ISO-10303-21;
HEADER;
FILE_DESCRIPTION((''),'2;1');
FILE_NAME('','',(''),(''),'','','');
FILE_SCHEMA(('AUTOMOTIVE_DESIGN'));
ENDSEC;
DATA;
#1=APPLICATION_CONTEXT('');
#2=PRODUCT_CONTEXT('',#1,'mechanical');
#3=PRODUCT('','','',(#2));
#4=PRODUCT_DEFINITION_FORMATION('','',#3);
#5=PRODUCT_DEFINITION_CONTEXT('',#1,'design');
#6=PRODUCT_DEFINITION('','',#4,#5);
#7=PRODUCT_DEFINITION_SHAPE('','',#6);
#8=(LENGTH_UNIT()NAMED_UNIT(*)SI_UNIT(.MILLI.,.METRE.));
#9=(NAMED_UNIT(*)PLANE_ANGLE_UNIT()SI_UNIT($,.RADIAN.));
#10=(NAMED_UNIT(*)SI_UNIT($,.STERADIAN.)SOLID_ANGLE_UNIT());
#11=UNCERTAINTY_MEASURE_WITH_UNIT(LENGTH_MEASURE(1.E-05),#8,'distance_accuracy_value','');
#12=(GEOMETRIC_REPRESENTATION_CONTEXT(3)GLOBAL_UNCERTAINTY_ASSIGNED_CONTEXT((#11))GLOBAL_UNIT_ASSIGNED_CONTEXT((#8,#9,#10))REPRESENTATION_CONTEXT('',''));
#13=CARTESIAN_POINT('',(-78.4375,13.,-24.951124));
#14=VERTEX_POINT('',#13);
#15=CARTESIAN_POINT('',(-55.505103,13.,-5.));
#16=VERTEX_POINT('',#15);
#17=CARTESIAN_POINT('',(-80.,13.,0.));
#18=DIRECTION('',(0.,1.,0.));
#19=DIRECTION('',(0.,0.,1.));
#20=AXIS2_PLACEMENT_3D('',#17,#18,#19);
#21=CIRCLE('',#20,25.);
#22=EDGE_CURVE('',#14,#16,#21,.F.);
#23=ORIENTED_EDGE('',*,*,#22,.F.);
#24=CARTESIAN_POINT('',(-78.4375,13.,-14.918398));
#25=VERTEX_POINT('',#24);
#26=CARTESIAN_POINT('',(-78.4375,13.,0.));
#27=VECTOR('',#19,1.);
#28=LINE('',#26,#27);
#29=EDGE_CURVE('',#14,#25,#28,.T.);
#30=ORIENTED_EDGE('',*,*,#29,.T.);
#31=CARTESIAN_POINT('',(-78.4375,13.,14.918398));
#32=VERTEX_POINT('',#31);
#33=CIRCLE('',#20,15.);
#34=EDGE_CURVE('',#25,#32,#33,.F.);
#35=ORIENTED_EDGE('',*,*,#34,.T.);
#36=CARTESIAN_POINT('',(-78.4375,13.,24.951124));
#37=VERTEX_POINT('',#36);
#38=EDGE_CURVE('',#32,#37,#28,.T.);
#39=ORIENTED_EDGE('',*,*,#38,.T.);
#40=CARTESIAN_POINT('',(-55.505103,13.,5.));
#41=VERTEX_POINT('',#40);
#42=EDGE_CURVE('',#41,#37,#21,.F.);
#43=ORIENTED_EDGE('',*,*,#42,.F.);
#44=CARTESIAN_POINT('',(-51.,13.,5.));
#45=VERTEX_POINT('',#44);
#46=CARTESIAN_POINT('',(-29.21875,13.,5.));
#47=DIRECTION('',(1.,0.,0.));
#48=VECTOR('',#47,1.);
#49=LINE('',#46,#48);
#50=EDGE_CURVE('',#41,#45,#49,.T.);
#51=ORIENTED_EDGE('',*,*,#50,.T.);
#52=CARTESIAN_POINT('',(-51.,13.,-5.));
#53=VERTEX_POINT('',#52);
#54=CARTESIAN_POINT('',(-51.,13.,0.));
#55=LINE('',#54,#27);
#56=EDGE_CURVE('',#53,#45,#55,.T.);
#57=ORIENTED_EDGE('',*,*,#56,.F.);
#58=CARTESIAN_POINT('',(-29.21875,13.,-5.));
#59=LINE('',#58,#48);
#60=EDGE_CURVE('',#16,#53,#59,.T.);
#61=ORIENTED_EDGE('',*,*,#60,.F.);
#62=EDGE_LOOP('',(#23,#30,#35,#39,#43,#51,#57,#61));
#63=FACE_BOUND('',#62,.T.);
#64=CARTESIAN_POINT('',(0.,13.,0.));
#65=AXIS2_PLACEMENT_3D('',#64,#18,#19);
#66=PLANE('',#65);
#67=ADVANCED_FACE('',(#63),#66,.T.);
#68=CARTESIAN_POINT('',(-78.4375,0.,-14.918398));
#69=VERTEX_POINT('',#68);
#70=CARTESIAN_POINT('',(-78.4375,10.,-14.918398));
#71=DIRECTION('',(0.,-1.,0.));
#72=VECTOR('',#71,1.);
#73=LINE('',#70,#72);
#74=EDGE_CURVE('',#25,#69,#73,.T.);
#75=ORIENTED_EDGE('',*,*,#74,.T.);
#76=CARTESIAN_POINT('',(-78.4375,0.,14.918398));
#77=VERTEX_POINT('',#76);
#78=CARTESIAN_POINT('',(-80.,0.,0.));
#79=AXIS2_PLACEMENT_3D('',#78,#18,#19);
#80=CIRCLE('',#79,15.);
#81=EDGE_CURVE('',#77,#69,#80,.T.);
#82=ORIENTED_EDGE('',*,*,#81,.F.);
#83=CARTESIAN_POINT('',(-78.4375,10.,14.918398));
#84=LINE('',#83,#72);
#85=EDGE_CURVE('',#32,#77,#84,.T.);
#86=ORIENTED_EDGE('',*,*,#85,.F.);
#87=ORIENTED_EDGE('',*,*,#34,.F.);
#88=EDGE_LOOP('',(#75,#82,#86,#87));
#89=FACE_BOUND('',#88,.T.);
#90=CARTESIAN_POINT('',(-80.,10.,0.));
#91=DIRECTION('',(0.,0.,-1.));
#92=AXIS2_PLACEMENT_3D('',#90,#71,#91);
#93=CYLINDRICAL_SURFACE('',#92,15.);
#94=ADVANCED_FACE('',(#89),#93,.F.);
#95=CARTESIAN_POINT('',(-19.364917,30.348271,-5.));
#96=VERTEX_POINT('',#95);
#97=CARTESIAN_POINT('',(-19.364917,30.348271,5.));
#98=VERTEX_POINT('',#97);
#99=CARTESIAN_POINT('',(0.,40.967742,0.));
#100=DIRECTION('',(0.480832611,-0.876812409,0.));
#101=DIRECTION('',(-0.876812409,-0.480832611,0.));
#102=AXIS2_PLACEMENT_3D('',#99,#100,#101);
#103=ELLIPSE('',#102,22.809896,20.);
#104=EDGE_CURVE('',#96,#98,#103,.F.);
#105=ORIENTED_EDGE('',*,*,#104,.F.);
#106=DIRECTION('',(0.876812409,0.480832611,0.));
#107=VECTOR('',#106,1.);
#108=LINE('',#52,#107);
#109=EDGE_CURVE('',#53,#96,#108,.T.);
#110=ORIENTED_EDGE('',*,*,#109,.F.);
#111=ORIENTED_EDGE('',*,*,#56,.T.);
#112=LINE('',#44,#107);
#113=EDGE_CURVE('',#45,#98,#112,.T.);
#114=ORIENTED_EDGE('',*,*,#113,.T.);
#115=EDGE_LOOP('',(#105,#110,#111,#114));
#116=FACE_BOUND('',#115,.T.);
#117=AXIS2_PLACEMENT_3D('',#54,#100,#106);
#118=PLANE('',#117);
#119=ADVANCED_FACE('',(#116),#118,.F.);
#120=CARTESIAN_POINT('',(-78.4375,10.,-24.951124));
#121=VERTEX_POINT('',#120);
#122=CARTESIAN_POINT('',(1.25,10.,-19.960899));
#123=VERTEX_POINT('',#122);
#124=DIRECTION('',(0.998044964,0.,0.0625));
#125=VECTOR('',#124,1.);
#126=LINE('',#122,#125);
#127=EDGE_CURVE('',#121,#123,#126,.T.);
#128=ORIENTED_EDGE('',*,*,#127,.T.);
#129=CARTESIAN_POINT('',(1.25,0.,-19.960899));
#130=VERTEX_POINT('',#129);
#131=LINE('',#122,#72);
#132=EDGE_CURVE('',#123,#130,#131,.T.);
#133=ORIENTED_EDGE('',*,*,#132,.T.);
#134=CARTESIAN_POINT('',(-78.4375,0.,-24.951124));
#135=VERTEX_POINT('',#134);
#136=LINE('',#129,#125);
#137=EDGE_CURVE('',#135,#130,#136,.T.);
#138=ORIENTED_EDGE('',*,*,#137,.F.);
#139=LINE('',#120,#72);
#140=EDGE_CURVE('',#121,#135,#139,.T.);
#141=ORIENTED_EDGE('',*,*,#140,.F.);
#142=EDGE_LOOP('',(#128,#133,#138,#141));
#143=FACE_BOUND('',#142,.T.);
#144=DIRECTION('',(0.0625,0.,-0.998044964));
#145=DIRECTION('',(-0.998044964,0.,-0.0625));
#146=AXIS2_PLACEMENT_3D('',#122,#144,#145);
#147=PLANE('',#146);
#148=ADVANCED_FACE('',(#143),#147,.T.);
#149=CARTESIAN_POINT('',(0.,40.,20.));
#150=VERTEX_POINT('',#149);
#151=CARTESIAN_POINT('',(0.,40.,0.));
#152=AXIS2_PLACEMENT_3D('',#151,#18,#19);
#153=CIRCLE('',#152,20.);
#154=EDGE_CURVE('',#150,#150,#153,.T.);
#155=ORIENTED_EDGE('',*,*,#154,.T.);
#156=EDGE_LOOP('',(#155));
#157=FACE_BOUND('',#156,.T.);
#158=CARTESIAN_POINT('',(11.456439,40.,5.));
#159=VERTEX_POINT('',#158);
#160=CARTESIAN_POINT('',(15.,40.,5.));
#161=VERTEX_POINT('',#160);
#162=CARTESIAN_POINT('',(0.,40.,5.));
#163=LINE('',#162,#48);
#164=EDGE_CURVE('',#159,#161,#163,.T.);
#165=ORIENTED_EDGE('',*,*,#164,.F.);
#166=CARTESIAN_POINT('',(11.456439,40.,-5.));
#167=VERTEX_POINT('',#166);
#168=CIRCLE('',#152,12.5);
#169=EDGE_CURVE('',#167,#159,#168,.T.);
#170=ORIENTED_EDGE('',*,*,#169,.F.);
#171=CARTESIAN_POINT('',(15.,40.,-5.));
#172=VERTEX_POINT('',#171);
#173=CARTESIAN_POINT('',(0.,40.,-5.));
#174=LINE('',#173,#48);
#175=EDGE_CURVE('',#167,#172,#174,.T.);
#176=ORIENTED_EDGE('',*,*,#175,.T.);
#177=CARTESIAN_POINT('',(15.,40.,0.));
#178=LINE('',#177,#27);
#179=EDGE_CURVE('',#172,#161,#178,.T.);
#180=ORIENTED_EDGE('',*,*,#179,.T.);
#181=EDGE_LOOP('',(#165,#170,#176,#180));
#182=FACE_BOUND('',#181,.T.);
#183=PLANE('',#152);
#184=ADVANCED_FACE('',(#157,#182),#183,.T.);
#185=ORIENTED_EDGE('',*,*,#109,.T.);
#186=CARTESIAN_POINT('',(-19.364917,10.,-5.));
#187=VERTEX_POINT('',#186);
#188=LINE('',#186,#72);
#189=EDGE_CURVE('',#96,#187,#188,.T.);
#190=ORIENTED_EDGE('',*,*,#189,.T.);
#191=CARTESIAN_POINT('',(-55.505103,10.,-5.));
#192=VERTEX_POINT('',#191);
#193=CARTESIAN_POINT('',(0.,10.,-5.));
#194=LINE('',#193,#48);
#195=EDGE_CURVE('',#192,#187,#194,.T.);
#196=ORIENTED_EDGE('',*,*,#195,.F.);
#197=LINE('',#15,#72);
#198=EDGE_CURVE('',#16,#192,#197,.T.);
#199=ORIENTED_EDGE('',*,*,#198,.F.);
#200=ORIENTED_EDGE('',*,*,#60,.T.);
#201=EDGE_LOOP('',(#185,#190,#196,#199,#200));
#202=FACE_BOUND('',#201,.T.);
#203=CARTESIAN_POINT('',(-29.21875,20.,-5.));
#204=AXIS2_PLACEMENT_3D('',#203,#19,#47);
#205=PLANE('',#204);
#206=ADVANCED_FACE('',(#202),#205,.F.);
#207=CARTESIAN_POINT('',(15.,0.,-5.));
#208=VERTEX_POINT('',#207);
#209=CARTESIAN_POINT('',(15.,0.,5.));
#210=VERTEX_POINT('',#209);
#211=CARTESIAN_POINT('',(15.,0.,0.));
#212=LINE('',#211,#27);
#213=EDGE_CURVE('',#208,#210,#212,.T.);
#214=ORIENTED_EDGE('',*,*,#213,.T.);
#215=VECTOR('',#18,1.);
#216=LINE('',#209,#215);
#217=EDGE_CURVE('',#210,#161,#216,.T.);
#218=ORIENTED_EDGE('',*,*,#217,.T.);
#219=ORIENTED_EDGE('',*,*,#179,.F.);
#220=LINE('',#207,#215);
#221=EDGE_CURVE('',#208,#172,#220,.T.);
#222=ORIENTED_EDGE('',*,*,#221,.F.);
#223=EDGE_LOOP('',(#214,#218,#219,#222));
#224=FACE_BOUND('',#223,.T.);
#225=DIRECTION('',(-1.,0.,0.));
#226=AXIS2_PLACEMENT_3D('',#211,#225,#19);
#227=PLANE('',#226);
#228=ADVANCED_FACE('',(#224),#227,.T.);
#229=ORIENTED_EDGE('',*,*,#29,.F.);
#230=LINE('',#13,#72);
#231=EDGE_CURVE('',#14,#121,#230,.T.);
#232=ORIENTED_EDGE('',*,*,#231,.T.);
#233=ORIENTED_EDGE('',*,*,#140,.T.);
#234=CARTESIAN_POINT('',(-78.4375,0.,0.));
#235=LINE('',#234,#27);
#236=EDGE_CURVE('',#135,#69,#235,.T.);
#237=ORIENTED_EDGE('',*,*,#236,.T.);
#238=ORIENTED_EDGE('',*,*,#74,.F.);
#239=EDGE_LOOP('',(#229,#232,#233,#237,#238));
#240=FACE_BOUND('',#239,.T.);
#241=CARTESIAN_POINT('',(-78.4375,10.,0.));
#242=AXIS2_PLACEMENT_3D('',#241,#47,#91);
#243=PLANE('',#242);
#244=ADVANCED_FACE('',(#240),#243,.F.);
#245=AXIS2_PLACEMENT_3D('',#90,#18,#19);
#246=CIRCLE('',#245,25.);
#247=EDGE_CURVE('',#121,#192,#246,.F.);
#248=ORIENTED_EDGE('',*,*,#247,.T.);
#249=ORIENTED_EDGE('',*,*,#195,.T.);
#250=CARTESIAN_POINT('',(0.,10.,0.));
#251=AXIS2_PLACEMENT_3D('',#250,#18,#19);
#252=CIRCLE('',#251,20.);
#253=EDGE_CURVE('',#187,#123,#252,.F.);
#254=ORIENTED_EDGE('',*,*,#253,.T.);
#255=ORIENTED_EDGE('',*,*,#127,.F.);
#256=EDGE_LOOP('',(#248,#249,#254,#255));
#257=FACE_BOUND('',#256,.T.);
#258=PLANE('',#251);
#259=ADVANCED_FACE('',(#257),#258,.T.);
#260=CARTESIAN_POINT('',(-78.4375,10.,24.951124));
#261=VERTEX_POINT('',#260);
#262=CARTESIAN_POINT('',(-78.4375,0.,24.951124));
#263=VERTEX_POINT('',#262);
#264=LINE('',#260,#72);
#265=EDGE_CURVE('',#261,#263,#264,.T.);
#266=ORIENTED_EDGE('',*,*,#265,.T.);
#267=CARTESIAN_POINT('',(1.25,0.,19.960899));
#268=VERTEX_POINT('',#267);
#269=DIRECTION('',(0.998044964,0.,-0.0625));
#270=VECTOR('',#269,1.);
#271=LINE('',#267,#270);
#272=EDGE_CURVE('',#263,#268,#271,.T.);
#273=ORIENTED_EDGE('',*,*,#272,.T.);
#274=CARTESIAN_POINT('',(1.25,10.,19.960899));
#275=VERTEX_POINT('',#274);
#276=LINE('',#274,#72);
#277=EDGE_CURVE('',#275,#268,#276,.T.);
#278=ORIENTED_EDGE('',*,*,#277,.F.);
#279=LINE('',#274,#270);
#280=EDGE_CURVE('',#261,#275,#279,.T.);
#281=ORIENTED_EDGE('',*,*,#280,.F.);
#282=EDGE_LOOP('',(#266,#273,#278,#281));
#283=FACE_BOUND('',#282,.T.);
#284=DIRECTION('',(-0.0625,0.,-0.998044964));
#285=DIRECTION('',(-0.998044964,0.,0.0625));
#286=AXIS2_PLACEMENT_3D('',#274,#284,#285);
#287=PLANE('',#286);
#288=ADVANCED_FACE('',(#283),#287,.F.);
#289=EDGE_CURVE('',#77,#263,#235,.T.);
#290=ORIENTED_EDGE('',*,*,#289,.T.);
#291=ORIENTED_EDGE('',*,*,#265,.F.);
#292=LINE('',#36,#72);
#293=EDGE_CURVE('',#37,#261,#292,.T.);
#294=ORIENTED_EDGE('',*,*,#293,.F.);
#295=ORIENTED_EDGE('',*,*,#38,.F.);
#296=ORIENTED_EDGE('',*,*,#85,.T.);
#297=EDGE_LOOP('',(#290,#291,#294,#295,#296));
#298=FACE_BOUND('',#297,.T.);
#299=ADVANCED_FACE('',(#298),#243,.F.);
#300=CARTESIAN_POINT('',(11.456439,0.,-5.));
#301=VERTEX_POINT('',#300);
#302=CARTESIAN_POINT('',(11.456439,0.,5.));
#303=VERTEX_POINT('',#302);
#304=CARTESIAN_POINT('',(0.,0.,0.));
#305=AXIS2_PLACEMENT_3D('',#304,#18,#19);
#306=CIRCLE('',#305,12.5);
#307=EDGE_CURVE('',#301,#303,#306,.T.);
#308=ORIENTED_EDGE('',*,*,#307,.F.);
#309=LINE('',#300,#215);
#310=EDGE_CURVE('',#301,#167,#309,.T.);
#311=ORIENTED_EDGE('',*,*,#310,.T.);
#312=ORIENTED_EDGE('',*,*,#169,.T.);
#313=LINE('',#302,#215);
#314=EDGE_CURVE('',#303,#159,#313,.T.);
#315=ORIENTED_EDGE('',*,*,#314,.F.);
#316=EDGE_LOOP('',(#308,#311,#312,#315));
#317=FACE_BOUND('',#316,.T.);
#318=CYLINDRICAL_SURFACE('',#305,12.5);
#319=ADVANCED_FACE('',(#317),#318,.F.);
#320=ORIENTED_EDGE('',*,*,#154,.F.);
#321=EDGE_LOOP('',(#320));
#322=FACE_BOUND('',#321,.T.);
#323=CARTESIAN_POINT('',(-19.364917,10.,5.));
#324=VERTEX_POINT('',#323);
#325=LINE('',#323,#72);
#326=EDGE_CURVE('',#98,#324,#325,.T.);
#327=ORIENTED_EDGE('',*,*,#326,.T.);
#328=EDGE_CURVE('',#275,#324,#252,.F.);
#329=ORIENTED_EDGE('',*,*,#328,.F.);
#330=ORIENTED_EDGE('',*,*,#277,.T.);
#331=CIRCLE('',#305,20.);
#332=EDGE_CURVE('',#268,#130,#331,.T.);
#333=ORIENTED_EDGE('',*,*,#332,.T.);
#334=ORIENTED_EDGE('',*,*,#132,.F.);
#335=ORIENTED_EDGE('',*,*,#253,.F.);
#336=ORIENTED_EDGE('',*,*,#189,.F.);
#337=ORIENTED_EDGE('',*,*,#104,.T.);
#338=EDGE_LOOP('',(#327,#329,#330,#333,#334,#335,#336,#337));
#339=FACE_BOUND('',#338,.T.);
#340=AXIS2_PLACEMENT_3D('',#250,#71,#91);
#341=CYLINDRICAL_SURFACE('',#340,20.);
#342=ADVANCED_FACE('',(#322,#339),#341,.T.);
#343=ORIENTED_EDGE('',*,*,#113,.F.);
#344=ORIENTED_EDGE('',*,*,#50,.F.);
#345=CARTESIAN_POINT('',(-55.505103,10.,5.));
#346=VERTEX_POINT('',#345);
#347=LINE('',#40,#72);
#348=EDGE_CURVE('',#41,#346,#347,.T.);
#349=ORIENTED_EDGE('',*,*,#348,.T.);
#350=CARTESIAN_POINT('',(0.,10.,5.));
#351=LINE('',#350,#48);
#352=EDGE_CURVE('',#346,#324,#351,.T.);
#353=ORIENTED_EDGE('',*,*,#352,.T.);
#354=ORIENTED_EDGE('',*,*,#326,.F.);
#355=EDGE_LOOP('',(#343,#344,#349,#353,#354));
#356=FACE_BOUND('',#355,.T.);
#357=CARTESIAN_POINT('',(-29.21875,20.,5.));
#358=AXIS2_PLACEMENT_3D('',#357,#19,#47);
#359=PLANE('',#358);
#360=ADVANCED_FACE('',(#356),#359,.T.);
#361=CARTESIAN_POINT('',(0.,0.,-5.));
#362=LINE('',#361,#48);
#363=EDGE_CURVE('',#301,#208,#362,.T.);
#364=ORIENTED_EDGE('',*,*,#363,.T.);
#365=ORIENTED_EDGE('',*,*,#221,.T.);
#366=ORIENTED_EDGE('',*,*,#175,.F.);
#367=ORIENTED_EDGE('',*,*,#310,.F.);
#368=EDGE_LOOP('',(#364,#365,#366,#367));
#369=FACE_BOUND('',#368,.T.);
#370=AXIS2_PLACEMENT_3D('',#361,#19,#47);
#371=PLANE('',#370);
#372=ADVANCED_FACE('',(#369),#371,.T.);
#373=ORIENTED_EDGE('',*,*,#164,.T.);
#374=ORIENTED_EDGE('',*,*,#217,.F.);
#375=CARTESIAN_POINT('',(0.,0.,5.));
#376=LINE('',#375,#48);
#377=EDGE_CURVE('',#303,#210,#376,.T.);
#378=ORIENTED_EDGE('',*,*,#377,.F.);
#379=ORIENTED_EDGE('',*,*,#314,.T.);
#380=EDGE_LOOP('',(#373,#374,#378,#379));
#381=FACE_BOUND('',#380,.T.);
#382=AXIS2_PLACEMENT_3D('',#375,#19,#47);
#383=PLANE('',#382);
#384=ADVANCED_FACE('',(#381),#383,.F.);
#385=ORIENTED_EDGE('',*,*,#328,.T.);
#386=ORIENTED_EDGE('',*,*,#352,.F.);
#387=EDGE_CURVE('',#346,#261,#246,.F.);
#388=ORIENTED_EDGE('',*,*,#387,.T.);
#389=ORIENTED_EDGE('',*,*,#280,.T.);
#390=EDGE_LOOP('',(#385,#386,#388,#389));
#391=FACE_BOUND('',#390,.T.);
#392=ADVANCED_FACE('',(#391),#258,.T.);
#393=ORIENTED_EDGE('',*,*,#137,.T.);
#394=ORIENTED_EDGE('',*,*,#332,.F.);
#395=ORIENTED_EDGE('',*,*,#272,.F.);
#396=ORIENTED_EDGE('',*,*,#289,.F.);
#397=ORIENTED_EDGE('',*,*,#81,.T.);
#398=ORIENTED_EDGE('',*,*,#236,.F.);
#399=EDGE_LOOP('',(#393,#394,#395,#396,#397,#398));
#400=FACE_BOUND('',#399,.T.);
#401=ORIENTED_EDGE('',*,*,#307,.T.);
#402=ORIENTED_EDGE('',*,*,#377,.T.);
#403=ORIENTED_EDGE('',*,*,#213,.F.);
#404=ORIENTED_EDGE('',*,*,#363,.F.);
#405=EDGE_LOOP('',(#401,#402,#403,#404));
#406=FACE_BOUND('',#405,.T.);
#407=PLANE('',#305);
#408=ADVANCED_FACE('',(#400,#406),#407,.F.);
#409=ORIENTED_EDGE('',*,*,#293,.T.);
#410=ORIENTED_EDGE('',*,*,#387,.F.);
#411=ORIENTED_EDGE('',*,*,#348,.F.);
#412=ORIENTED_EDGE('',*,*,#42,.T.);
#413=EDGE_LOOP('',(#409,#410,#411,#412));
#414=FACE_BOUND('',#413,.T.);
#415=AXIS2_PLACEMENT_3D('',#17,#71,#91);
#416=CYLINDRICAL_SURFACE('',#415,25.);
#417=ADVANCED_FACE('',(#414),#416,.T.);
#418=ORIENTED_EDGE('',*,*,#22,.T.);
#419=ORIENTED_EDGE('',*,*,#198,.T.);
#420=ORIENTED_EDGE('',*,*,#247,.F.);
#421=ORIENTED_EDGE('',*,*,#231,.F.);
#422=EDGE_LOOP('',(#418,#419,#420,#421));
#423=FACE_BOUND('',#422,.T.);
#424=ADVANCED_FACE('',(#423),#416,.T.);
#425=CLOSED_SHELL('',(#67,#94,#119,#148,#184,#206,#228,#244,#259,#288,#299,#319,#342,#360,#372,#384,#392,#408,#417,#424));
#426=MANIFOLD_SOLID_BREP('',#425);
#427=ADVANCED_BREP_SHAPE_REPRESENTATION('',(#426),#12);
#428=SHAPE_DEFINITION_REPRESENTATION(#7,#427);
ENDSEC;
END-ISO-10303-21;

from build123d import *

# Parameters (mm, degrees)
SKETCH_1_R          = 20
EXTRUDE_1_DEPTH     = 10
EXTRUDE_2_DEPTH     = 3
SKETCH_7_R          = 20
EXTRUDE_3_DEPTH     = 30
RIB_START           = -5
RIB_1_DEPTH         = 10
CUT_EXTRUDE_1_DEPTH = 92.515026089


# Read off the part's stored shape, not the designer's step: 筋1
with BuildPart() as part:
    # 草图1 → 凸台-拉伸1 (new body)
    with BuildSketch(Plane(origin=(0, 0, 0), x_dir=(1, 0, 0), z_dir=(0, 1, 0))):
        with BuildLine():
            Line((1.25, 19.960899278), (-78.4375, 24.951124098))
            ThreePointArc((-78.4375, 24.951124098), (-61.778275329, 17.116329922), (-55, 0))
            ThreePointArc((-55, 0), (-61.778275329, -17.116329922), (-78.4375, -24.951124098))
            Line((-78.4375, -24.951124098), (1.25, -19.960899278))
            ThreePointArc((1.25, -19.960899278), (-20, 0), (1.25, 19.960899278))
        make_face()
        with BuildLine():
            ThreePointArc((-55, 0), (-61.778275329, 17.116329922), (-78.4375, 24.951124098))
            Line((-78.4375, 24.951124098), (-78.4375, 14.918397828))
            ThreePointArc((-78.4375, 14.918397828), (-68.854653437, 10.038986503), (-65, 0))
            ThreePointArc((-65, 0), (-68.854653437, -10.038986503), (-78.4375, -14.918397828))
            Line((-78.4375, -14.918397828), (-78.4375, -24.951124098))
            ThreePointArc((-78.4375, -24.951124098), (-61.778275329, -17.116329922), (-55, 0))
        make_face()
        Circle(SKETCH_1_R)
    extrude(amount=EXTRUDE_1_DEPTH)

    # 草图5 → 凸台-拉伸2 (add)
    with BuildSketch(Plane(origin=(0, 10, 0), x_dir=(1, 0, 0), z_dir=(0, 1, 0))):
        with BuildLine():
            ThreePointArc((-78.4375, 24.951124098), (-55, 0), (-78.4375, -24.951124098))
            Line((-78.4375, -24.951124098), (-78.4375, -14.918397828))
            ThreePointArc((-78.4375, -14.918397828), (-65, 0), (-78.4375, 14.918397828))
            Line((-78.4375, 14.918397828), (-78.4375, 24.951124098))
        make_face()
    extrude(amount=EXTRUDE_2_DEPTH)

    # 草图7 → 凸台-拉伸3 (add)
    with BuildSketch(Plane(origin=(0, 10, 0), x_dir=(1, 0, 0), z_dir=(0, 1, 0))):
        with Locations(Location((0, 0, 0), (0, 0, 86.416678302))):
            Circle(SKETCH_7_R)
    extrude(amount=EXTRUDE_3_DEPTH)

    # 筋1 outline → 筋1 (add)
    with BuildSketch(Plane.XY.offset(RIB_START)):
        Polygon((-19.364916731, 30.34827147), (-51, 13), (-57, 13), (-57, 10), (-18, 10), (-18, 31.096774193), align=None)
    extrude(amount=RIB_1_DEPTH)

    # 草图9 → 切除-拉伸1 (cut, through all)
    with BuildSketch(Plane(origin=(0, 40, 0), x_dir=(1, 0, 0), z_dir=(0, 1, 0))):
        with BuildLine():
            Line((0, -5), (0, 5))
            Line((0, 5), (11.456439237, 5))
            ThreePointArc((11.456439237, 5), (-12.5, 0), (11.456439237, -5))
            Line((11.456439237, -5), (0, -5))
        make_face()
        with BuildLine():
            Line((11.456439237, 5), (0, 5))
            Line((0, 5), (0, -5))
            Line((0, -5), (11.456439237, -5))
            ThreePointArc((11.456439237, -5), (12.236328912, -2.553870546), (12.5, 0))
            ThreePointArc((12.5, 0), (12.236328912, 2.553870546), (11.456439237, 5))
        make_face()
        with BuildLine():
            Line((15, 5), (11.456439237, 5))
            ThreePointArc((11.456439237, 5), (12.236328912, 2.553870546), (12.5, 0))
            ThreePointArc((12.5, 0), (12.236328912, -2.553870546), (11.456439237, -5))
            Line((11.456439237, -5), (15, -5))
            Line((15, -5), (15, 5))
        make_face()
    extrude(amount=-CUT_EXTRUDE_1_DEPTH, mode=Mode.SUBTRACT)


solid = part.part
